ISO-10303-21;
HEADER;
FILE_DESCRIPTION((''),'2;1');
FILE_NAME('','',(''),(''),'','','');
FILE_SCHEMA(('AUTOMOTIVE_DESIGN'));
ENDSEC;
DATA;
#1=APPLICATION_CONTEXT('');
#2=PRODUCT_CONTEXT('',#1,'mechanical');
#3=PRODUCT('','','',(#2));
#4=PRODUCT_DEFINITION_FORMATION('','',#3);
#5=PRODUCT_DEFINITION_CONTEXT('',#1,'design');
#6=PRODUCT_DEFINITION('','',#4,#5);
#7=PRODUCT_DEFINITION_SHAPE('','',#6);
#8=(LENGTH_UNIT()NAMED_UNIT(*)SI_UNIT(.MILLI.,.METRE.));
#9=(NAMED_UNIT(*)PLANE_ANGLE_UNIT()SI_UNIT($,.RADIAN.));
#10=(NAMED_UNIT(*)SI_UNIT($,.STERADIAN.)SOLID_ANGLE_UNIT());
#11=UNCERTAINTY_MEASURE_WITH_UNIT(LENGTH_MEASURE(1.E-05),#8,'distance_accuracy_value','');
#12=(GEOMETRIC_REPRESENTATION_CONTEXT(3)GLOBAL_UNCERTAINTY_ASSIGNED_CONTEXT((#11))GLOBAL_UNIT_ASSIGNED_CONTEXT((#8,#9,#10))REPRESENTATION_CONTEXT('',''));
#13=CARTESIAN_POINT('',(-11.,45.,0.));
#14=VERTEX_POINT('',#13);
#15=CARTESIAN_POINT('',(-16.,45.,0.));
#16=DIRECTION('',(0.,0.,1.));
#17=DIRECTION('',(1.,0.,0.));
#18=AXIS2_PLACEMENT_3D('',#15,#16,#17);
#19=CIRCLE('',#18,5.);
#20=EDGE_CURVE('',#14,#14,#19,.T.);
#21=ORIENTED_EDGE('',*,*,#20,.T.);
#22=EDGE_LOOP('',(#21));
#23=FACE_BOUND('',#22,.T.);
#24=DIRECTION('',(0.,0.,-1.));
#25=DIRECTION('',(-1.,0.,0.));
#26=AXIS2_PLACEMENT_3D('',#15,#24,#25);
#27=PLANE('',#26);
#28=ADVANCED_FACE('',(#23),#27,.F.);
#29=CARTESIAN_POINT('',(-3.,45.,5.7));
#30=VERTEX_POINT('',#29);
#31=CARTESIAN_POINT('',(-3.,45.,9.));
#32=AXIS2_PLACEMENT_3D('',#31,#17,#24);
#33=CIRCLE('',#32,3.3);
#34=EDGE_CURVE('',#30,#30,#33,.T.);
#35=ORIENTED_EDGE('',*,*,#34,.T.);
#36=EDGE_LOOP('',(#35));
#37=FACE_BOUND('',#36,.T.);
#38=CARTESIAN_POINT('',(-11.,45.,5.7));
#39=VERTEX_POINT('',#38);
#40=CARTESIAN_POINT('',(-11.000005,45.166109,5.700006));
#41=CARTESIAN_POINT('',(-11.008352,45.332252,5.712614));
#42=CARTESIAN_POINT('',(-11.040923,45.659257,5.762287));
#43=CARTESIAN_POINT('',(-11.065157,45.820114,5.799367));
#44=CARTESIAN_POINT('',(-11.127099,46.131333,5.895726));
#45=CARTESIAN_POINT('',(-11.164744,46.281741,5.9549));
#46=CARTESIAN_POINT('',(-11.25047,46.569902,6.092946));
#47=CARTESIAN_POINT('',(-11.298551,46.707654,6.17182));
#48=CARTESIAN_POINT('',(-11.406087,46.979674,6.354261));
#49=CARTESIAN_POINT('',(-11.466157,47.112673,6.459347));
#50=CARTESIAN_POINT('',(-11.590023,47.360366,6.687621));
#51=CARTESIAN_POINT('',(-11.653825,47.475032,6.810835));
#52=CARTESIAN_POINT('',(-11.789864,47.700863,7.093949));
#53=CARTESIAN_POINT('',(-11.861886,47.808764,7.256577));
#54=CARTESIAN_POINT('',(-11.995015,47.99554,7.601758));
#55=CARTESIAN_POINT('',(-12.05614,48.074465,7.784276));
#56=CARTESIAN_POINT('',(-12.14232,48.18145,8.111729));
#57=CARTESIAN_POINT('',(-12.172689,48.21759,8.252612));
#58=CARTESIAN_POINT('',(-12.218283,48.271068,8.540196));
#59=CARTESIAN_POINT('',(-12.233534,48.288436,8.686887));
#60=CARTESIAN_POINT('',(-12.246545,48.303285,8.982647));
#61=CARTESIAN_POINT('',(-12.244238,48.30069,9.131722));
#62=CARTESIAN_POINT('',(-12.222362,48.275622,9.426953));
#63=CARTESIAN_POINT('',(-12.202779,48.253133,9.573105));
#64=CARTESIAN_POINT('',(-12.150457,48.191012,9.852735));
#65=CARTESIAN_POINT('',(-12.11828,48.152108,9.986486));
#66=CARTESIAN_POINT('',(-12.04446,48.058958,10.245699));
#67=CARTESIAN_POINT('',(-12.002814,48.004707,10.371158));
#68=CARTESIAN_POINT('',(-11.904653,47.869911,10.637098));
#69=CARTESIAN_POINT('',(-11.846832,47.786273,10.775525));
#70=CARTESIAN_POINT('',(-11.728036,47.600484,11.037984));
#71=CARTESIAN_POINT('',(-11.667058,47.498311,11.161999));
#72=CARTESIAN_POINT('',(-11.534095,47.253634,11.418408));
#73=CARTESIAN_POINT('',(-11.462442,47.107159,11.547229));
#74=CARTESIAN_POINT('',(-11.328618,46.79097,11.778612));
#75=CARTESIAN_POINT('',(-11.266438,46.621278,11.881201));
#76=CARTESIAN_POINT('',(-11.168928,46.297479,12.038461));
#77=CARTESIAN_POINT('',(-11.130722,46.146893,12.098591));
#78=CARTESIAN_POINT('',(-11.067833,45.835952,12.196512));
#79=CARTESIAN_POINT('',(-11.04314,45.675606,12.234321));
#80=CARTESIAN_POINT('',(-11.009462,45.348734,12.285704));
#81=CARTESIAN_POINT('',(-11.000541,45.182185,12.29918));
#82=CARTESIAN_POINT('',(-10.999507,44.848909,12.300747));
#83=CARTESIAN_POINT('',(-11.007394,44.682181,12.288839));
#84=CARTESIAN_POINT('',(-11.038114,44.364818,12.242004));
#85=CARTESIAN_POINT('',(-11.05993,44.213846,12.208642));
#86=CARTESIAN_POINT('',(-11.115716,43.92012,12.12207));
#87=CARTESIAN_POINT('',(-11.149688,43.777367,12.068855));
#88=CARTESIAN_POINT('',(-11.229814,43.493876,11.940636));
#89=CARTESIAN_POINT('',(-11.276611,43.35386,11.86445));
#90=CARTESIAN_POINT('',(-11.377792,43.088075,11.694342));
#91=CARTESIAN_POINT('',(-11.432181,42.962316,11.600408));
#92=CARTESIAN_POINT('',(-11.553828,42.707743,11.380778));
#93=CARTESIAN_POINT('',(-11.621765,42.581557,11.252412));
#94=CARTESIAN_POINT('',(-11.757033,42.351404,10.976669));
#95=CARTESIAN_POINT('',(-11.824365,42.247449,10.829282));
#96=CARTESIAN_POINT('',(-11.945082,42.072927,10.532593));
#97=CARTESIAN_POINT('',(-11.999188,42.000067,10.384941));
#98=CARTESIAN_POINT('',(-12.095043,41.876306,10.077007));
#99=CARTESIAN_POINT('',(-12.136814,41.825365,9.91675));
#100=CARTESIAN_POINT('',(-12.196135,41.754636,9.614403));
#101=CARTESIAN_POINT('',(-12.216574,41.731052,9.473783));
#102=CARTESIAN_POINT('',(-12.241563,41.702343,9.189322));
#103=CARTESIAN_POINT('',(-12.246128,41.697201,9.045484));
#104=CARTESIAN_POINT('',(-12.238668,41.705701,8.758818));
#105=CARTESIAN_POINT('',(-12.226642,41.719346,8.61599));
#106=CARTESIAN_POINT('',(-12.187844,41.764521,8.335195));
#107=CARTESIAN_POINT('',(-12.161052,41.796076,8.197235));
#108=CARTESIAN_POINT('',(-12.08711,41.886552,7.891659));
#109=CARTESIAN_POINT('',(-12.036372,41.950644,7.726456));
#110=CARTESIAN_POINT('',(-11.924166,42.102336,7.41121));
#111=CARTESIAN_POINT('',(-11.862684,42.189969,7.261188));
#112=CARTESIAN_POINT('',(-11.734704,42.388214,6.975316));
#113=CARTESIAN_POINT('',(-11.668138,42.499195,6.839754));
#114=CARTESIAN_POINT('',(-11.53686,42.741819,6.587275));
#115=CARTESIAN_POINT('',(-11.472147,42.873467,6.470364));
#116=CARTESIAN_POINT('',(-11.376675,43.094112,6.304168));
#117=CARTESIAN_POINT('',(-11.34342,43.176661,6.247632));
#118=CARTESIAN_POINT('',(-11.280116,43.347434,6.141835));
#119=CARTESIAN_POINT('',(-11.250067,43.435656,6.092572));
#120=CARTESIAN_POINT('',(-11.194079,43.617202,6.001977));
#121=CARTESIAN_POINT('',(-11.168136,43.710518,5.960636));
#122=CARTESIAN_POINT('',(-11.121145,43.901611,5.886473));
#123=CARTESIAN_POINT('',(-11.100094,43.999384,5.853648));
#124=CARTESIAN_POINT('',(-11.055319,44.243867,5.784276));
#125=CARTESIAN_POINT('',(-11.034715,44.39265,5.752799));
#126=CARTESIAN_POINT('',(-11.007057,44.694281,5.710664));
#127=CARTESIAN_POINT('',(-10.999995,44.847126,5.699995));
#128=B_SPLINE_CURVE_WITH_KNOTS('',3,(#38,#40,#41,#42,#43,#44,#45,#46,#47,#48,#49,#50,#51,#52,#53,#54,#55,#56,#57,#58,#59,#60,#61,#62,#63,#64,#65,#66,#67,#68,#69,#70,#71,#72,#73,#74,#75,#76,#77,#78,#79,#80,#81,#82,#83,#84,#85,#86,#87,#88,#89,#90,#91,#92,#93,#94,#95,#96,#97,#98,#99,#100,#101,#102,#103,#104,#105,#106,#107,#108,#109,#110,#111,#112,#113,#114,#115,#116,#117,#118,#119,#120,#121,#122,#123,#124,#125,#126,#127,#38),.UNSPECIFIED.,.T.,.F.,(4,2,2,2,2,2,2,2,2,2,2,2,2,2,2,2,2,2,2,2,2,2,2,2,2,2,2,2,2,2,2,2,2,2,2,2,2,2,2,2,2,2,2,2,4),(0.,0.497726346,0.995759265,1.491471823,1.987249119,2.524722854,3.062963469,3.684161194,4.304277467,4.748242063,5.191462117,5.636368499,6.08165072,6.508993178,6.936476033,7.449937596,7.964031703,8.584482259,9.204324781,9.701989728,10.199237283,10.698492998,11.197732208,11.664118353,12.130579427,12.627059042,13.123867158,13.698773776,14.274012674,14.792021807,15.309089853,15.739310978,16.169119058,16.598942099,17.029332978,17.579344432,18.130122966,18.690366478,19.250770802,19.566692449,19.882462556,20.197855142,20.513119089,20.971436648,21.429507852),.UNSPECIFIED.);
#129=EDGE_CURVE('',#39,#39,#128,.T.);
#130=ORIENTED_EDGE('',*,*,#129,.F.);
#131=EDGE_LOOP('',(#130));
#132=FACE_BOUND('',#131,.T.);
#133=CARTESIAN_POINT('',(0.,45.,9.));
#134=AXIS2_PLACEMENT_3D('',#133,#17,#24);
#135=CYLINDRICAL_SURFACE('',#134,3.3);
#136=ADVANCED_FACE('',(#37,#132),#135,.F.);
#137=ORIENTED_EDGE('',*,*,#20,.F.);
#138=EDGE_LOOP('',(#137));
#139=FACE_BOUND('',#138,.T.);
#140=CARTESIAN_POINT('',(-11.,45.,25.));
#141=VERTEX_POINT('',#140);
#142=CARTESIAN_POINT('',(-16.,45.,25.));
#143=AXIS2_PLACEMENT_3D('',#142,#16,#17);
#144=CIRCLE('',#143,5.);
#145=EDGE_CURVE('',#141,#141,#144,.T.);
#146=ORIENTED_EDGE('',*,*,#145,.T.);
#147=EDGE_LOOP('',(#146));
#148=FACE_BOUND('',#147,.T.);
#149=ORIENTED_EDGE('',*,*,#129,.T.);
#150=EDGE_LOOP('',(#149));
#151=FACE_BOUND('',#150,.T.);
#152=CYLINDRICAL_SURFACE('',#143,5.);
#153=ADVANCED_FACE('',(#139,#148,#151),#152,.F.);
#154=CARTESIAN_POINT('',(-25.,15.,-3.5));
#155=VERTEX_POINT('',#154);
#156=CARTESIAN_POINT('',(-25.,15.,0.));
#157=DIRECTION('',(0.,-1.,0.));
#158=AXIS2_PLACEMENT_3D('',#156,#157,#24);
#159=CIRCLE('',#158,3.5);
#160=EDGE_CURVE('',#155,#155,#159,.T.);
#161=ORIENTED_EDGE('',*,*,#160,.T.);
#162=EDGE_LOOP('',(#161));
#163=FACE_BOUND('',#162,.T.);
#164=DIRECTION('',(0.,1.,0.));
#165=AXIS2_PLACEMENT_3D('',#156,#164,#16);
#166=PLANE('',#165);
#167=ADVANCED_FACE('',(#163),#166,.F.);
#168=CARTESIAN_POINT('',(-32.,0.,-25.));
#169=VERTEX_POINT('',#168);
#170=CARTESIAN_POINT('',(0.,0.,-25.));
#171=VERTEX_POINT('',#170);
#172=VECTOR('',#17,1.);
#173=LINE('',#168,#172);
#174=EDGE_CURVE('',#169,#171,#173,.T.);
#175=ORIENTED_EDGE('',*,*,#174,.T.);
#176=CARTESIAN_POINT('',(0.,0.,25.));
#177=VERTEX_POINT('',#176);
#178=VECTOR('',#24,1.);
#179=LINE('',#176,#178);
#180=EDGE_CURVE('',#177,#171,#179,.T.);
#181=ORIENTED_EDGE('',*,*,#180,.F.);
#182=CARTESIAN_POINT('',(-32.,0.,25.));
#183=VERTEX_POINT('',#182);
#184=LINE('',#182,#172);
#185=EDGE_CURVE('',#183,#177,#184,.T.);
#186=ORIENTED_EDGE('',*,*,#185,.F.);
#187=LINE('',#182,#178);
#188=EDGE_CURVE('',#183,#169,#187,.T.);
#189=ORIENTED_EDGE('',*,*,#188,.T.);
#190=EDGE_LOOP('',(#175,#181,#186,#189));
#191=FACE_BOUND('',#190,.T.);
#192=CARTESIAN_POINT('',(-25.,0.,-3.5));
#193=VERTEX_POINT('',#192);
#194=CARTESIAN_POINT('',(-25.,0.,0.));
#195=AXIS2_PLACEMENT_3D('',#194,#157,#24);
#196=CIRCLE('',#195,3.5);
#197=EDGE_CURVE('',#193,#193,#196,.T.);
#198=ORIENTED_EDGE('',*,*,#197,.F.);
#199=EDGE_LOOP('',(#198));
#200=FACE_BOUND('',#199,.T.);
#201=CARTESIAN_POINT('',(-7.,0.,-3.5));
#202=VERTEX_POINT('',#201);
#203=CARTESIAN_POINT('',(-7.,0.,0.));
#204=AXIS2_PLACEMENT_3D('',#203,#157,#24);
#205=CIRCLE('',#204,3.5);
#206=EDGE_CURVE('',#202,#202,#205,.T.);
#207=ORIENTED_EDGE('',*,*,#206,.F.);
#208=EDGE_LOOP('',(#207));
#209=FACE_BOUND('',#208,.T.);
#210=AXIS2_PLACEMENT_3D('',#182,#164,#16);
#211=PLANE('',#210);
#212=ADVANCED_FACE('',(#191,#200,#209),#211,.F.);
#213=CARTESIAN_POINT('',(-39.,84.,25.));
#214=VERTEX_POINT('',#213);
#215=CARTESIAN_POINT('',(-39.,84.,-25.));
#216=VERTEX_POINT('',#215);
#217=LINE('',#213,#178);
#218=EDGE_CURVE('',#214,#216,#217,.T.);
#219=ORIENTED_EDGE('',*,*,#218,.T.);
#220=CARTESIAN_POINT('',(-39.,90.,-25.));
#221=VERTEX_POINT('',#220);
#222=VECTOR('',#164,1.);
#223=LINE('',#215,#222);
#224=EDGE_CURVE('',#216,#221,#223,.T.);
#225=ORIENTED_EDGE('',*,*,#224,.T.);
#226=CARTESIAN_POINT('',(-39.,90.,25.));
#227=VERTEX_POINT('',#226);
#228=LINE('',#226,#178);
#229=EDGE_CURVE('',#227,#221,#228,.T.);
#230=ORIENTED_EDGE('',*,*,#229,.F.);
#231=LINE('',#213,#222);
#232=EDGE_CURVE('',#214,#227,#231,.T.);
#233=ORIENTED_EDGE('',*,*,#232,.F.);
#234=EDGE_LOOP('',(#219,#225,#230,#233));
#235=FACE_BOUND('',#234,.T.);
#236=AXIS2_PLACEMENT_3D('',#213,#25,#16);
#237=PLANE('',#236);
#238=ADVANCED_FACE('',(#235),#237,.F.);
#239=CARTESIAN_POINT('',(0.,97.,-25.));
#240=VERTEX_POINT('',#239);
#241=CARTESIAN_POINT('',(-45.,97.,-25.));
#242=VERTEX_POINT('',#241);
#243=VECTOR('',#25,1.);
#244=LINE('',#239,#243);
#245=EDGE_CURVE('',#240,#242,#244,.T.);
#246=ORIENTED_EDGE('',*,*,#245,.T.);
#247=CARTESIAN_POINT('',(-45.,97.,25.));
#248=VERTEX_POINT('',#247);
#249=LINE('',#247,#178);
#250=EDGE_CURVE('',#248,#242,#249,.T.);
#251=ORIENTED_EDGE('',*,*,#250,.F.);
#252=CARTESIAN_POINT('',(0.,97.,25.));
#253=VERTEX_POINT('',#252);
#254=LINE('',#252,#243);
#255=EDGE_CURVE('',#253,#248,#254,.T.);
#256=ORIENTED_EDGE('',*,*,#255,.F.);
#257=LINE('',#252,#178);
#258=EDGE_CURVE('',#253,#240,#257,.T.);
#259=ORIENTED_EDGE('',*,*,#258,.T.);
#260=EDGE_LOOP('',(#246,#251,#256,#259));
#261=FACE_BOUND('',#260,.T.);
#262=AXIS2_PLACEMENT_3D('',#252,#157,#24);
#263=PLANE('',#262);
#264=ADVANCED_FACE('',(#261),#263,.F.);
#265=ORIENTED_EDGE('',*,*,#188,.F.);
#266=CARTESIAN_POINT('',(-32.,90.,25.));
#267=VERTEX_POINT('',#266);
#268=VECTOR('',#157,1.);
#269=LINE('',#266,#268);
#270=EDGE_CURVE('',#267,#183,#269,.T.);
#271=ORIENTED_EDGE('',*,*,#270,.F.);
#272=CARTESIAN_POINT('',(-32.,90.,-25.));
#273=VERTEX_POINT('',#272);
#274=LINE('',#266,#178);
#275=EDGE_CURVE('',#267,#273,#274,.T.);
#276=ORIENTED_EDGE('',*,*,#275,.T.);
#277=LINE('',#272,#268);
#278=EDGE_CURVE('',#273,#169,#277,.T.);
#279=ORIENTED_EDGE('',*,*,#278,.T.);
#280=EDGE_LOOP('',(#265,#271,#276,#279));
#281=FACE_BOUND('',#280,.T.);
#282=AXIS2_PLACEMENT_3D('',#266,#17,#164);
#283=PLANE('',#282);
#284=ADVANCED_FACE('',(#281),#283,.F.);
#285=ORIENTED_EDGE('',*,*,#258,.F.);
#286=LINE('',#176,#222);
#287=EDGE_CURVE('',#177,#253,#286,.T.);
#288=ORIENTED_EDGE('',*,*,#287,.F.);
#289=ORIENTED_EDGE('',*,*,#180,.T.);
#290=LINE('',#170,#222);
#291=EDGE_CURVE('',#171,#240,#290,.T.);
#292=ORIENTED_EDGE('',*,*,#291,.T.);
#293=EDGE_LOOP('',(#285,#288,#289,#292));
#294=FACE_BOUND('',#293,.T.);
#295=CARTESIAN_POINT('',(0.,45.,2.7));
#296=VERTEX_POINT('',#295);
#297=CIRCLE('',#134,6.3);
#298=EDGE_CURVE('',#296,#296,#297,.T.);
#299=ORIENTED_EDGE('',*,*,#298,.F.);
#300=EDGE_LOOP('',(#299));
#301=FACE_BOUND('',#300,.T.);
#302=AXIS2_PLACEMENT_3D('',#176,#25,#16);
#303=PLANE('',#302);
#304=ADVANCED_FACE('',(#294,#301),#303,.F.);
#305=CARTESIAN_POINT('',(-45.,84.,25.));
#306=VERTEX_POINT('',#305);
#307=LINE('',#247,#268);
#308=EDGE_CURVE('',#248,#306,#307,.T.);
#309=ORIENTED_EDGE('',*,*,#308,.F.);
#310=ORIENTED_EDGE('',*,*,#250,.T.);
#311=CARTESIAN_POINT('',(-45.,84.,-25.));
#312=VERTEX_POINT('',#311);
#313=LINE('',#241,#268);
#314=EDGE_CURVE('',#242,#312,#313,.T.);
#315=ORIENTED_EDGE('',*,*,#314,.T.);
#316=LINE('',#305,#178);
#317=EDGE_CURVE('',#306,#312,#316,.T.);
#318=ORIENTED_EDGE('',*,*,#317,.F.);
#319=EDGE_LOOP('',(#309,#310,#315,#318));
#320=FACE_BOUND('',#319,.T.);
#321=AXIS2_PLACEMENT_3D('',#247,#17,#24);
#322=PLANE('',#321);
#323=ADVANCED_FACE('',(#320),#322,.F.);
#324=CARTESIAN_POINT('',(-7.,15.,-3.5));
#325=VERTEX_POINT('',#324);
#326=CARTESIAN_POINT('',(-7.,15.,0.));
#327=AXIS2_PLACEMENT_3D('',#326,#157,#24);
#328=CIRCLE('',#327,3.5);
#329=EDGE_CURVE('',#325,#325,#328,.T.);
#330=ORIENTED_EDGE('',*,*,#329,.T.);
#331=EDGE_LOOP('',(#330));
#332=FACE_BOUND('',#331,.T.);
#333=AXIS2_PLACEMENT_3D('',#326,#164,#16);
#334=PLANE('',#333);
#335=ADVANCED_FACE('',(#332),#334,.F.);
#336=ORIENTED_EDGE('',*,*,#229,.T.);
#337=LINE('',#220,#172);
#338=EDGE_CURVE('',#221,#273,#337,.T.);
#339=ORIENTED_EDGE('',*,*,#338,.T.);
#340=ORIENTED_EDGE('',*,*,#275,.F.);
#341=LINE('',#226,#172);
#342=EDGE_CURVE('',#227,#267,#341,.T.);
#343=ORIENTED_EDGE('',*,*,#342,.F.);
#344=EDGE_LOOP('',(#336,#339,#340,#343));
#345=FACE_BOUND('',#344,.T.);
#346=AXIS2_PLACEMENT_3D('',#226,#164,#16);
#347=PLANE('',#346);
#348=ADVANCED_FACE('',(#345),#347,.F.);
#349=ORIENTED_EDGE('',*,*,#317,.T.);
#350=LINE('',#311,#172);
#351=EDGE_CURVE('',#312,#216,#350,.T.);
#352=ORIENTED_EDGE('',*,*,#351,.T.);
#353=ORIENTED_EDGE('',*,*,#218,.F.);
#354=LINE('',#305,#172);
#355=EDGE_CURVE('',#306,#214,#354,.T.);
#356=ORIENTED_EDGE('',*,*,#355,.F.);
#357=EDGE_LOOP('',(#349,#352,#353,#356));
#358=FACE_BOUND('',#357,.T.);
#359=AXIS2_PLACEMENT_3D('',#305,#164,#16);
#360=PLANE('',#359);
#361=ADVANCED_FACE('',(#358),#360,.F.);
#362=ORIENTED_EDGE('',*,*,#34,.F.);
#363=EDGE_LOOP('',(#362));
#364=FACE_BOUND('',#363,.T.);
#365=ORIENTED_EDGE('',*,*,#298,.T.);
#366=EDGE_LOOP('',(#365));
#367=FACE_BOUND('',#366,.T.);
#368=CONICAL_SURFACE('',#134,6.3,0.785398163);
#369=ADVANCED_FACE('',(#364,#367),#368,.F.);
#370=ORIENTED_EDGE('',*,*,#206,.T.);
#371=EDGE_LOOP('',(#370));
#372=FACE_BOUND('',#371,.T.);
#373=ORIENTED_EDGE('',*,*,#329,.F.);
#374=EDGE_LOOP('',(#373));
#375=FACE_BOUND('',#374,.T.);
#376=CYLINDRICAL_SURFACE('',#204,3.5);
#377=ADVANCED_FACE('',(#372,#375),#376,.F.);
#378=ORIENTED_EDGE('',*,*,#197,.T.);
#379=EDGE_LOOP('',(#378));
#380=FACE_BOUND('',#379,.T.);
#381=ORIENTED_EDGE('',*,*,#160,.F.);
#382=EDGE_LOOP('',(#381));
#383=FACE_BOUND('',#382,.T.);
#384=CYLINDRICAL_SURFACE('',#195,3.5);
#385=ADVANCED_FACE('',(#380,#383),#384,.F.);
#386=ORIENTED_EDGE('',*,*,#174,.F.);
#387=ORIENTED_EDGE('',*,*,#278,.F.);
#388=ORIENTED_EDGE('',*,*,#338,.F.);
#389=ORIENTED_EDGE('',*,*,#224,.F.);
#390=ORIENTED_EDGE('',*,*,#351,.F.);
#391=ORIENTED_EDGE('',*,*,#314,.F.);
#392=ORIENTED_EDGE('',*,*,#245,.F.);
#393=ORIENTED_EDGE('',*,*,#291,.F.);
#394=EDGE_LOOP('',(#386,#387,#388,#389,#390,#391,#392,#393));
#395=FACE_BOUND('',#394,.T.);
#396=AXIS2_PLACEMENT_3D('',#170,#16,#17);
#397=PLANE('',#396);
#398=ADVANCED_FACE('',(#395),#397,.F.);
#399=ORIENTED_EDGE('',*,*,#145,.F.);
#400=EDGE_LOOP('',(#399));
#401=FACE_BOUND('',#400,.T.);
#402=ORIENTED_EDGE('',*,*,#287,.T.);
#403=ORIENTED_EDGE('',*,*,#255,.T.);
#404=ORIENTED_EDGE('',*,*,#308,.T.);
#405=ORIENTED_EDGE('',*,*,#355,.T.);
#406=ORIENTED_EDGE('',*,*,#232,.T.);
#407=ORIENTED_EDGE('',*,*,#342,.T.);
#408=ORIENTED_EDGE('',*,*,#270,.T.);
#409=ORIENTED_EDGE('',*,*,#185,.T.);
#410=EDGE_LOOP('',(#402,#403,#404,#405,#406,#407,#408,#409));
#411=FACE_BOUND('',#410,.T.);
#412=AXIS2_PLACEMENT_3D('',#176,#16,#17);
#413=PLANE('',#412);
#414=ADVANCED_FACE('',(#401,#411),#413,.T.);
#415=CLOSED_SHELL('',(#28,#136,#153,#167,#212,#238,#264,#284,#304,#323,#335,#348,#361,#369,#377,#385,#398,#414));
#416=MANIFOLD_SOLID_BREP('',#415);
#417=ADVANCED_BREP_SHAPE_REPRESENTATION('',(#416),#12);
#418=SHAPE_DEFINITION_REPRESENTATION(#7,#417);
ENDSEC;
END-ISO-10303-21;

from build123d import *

# Parameters (mm, degrees)
BOSS_EXTRUDE1_DEPTH       = 25
F_1_0MM_DOWEL_HOLE1_D     = 10
F_1_0MM_DOWEL_HOLE1_DEPTH = 25
M8X1_0_TAPPED_HOLE1_D     = 7
M8X1_0_TAPPED_HOLE1_DEPTH = 15


# Read off the part's stored shape, not the designer's step: CSK for M6 Flat Head Machine Screw1
with BuildPart() as part:
    # Sketch1 → Boss-Extrude1 (new, symmetric)
    with BuildSketch(Plane.XY):
        Polygon((0, 0), (0, 97), (-45, 97), (-45, 84), (-39, 84), (-39, 90), (-32, 90), (-32, 0), align=None)
    extrude(amount=BOSS_EXTRUDE1_DEPTH, both=True)

    # Ø1.0mm Dowel Hole1
    with Locations(Plane.XY.offset(25)):
        with Locations((-16, 45)):
            Hole(F_1_0MM_DOWEL_HOLE1_D / 2, depth=F_1_0MM_DOWEL_HOLE1_DEPTH)

    # M8x1.0 Tapped Hole1
    with Locations(Plane(origin=(0, 0, 0), x_dir=(-1, 0, 0), z_dir=(0, -1, 0))):
        with Locations((7, 0), (25, 0)):
            Hole(M8X1_0_TAPPED_HOLE1_D / 2, depth=M8X1_0_TAPPED_HOLE1_DEPTH)

    # CSK for M6 Flat Head Machine Screw1 outl → CSK for M6 Flat Head Machine Screw1 (revolve, cut)
    with BuildSketch(Plane(origin=(0, 45, 9), x_dir=(0, 1, 0), z_dir=(0, 0, -1))):
        Polygon((0, -12.244302381), (3.3, -12.244302381), (3.3, -3), (6.3, 0), (0, 0), align=None)
    revolve(axis=Axis((0, 45, 9), (1, 0, 0)), mode=Mode.SUBTRACT)


solid = part.part
